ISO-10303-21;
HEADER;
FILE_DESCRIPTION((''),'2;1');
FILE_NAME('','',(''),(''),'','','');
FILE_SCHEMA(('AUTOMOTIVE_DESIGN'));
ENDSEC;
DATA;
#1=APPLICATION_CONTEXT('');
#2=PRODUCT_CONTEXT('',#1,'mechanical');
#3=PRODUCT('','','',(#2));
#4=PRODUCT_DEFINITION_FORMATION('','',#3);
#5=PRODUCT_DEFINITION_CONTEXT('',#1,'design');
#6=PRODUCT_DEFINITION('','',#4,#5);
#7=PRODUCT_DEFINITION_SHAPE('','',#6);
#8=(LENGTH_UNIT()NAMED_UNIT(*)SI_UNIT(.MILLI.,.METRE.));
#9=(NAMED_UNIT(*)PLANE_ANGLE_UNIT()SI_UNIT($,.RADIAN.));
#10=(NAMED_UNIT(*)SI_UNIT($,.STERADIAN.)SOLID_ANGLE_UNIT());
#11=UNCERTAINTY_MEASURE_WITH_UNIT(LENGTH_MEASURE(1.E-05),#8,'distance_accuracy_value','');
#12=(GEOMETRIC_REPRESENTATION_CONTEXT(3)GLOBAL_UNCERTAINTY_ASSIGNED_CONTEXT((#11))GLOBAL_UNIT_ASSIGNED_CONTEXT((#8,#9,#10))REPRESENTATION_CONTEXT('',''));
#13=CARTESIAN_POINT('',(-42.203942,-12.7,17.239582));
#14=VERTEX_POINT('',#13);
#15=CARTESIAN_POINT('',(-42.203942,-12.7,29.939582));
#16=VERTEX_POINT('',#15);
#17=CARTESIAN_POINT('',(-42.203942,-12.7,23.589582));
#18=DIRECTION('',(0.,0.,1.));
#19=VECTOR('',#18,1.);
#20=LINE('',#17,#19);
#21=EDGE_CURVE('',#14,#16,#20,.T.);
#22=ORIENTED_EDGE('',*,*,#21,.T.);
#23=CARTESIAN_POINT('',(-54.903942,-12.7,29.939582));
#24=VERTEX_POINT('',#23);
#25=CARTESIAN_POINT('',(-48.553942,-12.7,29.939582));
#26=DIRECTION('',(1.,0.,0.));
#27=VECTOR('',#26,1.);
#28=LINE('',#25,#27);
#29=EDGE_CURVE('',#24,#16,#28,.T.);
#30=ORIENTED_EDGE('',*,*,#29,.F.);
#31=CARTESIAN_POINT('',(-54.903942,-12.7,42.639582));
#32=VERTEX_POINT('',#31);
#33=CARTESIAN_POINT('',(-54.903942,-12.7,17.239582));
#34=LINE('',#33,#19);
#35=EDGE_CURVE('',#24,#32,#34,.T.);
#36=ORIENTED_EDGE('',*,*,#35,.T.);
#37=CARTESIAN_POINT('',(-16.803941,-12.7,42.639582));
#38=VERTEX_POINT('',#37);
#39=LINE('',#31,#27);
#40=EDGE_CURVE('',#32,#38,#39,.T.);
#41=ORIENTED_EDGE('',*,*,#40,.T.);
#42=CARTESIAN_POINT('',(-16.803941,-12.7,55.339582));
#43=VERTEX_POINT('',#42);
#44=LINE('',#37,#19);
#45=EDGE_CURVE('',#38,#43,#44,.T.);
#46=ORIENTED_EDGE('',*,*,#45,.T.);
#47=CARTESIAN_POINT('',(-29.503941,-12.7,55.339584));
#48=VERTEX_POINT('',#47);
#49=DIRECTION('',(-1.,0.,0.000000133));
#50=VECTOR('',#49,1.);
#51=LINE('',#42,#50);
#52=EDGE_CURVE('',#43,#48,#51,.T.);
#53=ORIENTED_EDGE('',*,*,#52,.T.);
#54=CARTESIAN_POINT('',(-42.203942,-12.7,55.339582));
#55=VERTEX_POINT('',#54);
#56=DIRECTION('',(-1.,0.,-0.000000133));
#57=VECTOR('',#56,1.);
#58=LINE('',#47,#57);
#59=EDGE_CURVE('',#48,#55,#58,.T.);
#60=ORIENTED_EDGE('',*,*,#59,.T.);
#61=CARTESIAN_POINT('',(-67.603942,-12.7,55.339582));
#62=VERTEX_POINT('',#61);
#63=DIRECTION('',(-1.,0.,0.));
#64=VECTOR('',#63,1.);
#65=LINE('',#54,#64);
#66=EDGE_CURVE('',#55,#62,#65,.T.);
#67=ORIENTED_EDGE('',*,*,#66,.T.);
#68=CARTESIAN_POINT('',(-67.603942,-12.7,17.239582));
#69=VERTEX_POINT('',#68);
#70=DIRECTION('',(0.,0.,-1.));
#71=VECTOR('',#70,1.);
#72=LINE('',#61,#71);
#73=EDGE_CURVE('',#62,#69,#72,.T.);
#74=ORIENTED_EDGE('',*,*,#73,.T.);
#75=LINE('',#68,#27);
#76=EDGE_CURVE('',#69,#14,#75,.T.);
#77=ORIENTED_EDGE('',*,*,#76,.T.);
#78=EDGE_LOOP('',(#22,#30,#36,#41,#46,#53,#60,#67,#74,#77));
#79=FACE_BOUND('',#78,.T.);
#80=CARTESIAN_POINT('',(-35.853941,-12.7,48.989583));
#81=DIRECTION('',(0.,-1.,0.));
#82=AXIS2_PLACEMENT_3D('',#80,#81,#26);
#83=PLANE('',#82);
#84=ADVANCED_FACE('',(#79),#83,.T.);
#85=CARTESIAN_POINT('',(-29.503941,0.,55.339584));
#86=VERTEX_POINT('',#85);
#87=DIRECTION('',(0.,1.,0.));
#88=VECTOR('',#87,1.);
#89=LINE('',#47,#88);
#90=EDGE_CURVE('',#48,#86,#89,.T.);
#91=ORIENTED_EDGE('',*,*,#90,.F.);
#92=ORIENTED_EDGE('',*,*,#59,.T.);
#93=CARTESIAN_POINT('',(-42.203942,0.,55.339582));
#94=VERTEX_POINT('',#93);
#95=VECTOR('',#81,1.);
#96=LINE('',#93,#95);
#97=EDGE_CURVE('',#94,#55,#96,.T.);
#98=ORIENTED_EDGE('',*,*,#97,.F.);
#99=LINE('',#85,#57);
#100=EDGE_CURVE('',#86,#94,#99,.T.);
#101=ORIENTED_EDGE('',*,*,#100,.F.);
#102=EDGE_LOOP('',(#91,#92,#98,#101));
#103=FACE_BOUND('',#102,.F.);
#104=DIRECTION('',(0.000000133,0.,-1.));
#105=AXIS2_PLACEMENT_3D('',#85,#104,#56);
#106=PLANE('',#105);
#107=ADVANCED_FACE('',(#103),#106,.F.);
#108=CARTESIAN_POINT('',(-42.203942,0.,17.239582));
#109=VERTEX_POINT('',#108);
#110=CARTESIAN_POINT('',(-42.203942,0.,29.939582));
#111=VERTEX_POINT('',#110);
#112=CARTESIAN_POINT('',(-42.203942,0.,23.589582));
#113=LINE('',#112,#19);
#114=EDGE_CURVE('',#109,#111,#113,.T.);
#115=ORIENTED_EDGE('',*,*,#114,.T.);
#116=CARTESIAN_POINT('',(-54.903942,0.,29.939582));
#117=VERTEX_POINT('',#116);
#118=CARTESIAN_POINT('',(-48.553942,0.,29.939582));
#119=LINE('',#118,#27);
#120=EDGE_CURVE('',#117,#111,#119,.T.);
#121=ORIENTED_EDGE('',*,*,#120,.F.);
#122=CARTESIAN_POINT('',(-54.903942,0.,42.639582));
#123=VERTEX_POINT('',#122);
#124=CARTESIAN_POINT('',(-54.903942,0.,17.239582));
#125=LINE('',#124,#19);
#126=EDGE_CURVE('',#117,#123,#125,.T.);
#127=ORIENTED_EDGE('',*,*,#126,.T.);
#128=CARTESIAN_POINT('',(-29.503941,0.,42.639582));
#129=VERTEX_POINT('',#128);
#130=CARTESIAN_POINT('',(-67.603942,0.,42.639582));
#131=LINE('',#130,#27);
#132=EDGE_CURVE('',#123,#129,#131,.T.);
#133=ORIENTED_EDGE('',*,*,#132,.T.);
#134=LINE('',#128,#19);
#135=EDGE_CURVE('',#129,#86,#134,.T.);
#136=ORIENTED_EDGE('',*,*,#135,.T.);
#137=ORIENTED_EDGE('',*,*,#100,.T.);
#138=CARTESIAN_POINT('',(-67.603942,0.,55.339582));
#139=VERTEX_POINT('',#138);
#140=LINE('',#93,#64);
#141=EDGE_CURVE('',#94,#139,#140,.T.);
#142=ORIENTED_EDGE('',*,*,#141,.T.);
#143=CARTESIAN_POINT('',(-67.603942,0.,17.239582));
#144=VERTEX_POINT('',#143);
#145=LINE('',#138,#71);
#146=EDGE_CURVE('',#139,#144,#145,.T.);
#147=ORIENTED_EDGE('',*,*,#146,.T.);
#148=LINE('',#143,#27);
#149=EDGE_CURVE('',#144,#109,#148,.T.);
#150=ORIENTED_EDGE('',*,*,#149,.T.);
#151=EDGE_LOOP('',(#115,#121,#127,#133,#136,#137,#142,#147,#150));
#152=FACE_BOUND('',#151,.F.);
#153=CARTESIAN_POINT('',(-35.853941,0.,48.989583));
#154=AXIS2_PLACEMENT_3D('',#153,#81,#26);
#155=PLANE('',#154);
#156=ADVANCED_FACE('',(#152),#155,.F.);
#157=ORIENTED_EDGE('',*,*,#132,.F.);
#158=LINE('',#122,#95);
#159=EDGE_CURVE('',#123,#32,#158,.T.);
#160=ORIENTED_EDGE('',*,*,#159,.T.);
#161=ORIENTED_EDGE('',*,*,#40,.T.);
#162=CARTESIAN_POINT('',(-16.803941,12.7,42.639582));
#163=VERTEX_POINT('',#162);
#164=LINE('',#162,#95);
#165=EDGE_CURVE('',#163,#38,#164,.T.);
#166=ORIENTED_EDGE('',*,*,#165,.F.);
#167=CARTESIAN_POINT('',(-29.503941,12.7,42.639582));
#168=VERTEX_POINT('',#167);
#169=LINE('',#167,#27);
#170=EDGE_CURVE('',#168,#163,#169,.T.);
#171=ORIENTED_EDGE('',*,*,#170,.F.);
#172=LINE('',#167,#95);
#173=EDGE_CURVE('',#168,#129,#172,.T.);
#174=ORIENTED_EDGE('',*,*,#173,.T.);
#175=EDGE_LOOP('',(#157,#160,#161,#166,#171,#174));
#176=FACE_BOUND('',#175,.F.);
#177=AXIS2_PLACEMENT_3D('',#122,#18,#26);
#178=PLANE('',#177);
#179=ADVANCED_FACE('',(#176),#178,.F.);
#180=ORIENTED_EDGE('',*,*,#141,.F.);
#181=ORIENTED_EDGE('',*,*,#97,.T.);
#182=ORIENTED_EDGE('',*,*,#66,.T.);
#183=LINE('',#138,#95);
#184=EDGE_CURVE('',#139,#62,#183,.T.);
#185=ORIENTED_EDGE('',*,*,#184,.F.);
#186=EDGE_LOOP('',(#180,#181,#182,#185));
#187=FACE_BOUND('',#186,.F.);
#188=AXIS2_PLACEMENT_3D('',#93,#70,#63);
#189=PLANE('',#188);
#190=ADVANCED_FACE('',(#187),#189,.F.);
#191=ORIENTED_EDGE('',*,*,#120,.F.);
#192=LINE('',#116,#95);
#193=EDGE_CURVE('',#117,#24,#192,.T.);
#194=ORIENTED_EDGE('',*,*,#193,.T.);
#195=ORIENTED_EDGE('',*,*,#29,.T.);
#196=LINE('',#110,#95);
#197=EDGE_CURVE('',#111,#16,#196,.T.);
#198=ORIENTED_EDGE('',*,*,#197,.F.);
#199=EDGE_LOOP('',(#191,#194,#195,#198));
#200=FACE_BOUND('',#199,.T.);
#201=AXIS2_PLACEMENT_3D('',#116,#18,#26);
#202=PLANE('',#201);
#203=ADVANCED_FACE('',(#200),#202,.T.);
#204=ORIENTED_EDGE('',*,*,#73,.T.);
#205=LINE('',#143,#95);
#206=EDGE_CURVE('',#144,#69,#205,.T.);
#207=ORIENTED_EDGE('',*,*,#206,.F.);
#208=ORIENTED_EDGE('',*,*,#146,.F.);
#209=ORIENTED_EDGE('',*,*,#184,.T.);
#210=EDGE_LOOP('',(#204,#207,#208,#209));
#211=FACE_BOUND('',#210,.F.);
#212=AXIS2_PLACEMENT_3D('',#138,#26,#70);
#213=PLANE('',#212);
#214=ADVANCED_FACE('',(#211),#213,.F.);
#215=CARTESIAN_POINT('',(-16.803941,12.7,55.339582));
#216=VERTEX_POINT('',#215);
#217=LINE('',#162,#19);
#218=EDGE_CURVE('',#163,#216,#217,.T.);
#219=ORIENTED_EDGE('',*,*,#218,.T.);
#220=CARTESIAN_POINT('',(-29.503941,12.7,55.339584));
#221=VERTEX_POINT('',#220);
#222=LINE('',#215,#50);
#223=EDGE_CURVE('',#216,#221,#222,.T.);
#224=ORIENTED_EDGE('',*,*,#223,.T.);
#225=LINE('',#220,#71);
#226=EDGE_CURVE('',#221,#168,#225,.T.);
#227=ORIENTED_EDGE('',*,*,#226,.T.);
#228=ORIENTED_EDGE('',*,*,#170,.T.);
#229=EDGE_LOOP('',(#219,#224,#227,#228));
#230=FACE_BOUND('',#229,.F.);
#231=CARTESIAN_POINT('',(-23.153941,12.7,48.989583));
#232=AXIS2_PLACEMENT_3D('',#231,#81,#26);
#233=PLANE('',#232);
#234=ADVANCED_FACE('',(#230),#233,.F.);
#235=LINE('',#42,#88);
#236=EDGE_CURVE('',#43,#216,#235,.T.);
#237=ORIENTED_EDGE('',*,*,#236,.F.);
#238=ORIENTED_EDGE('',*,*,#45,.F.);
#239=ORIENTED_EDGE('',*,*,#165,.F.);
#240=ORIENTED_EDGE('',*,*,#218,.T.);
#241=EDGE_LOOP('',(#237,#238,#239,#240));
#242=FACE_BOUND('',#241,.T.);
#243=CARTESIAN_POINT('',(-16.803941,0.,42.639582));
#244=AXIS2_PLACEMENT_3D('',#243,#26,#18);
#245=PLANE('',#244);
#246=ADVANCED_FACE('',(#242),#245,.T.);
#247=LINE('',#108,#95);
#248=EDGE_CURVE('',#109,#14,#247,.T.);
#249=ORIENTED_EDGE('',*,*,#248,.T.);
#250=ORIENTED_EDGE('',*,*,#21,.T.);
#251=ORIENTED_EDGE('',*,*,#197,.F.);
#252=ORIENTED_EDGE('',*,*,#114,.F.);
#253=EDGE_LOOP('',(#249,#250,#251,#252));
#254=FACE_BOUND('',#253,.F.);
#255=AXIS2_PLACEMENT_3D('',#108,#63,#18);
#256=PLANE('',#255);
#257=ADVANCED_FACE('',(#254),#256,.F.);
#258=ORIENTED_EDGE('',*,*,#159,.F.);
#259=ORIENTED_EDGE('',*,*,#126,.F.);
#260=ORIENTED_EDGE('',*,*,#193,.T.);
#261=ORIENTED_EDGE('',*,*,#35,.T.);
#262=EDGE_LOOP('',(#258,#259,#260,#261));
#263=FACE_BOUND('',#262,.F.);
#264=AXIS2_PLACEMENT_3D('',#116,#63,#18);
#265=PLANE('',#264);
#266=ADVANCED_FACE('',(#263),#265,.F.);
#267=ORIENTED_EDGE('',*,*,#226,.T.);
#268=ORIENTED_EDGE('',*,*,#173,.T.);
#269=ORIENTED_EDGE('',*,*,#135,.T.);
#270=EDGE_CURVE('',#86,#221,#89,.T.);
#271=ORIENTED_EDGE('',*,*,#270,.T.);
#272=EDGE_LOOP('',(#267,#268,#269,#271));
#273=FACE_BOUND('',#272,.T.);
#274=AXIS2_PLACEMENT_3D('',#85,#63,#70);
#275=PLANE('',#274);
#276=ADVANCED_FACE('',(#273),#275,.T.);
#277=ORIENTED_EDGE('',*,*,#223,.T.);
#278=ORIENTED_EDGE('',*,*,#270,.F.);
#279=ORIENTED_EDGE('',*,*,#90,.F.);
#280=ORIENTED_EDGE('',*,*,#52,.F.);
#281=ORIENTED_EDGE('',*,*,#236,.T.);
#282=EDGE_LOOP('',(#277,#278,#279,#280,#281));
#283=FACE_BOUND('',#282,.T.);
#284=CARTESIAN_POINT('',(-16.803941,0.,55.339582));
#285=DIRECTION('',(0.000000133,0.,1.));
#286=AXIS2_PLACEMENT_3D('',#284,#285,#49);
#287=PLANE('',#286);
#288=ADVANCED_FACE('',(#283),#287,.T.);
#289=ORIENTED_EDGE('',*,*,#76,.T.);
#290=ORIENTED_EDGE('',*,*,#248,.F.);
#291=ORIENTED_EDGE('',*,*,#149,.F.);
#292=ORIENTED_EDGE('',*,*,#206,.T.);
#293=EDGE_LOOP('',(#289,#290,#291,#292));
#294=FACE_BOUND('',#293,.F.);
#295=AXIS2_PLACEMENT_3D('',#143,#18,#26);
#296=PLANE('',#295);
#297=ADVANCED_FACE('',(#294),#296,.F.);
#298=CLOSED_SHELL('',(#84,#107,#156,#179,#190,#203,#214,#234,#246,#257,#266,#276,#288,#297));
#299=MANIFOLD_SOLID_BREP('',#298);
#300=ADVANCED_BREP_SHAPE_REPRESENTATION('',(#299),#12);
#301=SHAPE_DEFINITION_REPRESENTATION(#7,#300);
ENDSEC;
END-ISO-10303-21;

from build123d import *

# Parameters (mm, degrees)
F1_DEPTH = 12.7
F0_W     = 12.7
F0_H     = 12.7
F2_DEPTH = 12.7


# Not quite as in the source:
# - ends of sketch curves that miss each other by under 0.0002 mm in the source are joined


with BuildPart() as f1:
    # F0 (on Front) → F1 (new body, symmetric)
    with BuildSketch(Plane.XZ):
        Polygon((-29.5039405265, 55.3395837995), (-29.5039405265, 42.6395821044), (-16.8039405265, 42.6395821044), (-16.8039405265, 55.3395821044), align=None)
    extrude(amount=F1_DEPTH, both=True)

    # F0 (on Front) → F2 (join)
    with BuildSketch(Plane.XZ):
        Polygon((-42.2039422216, 55.3395821044), (-42.2039422216, 42.6395821044), (-29.5039405265, 42.6395821044), (-29.5039405265, 55.3395837995), align=None)
        with Locations((-48.5539422216, 48.9895821044)):
            Rectangle(F0_W, F0_H)
        with Locations((-61.2539422216, 48.9895821044)):
            Rectangle(F0_W, F0_H)
        with Locations((-61.2539422216, 36.2895821044)):
            Rectangle(F0_W, F0_H)
        with Locations((-61.2539422216, 23.5895821044)):
            Rectangle(F0_W, F0_H)
        with Locations((-48.5539422216, 23.5895821044)):
            Rectangle(F0_W, F0_H)
    extrude(amount=F2_DEPTH)


solid = f1.part
